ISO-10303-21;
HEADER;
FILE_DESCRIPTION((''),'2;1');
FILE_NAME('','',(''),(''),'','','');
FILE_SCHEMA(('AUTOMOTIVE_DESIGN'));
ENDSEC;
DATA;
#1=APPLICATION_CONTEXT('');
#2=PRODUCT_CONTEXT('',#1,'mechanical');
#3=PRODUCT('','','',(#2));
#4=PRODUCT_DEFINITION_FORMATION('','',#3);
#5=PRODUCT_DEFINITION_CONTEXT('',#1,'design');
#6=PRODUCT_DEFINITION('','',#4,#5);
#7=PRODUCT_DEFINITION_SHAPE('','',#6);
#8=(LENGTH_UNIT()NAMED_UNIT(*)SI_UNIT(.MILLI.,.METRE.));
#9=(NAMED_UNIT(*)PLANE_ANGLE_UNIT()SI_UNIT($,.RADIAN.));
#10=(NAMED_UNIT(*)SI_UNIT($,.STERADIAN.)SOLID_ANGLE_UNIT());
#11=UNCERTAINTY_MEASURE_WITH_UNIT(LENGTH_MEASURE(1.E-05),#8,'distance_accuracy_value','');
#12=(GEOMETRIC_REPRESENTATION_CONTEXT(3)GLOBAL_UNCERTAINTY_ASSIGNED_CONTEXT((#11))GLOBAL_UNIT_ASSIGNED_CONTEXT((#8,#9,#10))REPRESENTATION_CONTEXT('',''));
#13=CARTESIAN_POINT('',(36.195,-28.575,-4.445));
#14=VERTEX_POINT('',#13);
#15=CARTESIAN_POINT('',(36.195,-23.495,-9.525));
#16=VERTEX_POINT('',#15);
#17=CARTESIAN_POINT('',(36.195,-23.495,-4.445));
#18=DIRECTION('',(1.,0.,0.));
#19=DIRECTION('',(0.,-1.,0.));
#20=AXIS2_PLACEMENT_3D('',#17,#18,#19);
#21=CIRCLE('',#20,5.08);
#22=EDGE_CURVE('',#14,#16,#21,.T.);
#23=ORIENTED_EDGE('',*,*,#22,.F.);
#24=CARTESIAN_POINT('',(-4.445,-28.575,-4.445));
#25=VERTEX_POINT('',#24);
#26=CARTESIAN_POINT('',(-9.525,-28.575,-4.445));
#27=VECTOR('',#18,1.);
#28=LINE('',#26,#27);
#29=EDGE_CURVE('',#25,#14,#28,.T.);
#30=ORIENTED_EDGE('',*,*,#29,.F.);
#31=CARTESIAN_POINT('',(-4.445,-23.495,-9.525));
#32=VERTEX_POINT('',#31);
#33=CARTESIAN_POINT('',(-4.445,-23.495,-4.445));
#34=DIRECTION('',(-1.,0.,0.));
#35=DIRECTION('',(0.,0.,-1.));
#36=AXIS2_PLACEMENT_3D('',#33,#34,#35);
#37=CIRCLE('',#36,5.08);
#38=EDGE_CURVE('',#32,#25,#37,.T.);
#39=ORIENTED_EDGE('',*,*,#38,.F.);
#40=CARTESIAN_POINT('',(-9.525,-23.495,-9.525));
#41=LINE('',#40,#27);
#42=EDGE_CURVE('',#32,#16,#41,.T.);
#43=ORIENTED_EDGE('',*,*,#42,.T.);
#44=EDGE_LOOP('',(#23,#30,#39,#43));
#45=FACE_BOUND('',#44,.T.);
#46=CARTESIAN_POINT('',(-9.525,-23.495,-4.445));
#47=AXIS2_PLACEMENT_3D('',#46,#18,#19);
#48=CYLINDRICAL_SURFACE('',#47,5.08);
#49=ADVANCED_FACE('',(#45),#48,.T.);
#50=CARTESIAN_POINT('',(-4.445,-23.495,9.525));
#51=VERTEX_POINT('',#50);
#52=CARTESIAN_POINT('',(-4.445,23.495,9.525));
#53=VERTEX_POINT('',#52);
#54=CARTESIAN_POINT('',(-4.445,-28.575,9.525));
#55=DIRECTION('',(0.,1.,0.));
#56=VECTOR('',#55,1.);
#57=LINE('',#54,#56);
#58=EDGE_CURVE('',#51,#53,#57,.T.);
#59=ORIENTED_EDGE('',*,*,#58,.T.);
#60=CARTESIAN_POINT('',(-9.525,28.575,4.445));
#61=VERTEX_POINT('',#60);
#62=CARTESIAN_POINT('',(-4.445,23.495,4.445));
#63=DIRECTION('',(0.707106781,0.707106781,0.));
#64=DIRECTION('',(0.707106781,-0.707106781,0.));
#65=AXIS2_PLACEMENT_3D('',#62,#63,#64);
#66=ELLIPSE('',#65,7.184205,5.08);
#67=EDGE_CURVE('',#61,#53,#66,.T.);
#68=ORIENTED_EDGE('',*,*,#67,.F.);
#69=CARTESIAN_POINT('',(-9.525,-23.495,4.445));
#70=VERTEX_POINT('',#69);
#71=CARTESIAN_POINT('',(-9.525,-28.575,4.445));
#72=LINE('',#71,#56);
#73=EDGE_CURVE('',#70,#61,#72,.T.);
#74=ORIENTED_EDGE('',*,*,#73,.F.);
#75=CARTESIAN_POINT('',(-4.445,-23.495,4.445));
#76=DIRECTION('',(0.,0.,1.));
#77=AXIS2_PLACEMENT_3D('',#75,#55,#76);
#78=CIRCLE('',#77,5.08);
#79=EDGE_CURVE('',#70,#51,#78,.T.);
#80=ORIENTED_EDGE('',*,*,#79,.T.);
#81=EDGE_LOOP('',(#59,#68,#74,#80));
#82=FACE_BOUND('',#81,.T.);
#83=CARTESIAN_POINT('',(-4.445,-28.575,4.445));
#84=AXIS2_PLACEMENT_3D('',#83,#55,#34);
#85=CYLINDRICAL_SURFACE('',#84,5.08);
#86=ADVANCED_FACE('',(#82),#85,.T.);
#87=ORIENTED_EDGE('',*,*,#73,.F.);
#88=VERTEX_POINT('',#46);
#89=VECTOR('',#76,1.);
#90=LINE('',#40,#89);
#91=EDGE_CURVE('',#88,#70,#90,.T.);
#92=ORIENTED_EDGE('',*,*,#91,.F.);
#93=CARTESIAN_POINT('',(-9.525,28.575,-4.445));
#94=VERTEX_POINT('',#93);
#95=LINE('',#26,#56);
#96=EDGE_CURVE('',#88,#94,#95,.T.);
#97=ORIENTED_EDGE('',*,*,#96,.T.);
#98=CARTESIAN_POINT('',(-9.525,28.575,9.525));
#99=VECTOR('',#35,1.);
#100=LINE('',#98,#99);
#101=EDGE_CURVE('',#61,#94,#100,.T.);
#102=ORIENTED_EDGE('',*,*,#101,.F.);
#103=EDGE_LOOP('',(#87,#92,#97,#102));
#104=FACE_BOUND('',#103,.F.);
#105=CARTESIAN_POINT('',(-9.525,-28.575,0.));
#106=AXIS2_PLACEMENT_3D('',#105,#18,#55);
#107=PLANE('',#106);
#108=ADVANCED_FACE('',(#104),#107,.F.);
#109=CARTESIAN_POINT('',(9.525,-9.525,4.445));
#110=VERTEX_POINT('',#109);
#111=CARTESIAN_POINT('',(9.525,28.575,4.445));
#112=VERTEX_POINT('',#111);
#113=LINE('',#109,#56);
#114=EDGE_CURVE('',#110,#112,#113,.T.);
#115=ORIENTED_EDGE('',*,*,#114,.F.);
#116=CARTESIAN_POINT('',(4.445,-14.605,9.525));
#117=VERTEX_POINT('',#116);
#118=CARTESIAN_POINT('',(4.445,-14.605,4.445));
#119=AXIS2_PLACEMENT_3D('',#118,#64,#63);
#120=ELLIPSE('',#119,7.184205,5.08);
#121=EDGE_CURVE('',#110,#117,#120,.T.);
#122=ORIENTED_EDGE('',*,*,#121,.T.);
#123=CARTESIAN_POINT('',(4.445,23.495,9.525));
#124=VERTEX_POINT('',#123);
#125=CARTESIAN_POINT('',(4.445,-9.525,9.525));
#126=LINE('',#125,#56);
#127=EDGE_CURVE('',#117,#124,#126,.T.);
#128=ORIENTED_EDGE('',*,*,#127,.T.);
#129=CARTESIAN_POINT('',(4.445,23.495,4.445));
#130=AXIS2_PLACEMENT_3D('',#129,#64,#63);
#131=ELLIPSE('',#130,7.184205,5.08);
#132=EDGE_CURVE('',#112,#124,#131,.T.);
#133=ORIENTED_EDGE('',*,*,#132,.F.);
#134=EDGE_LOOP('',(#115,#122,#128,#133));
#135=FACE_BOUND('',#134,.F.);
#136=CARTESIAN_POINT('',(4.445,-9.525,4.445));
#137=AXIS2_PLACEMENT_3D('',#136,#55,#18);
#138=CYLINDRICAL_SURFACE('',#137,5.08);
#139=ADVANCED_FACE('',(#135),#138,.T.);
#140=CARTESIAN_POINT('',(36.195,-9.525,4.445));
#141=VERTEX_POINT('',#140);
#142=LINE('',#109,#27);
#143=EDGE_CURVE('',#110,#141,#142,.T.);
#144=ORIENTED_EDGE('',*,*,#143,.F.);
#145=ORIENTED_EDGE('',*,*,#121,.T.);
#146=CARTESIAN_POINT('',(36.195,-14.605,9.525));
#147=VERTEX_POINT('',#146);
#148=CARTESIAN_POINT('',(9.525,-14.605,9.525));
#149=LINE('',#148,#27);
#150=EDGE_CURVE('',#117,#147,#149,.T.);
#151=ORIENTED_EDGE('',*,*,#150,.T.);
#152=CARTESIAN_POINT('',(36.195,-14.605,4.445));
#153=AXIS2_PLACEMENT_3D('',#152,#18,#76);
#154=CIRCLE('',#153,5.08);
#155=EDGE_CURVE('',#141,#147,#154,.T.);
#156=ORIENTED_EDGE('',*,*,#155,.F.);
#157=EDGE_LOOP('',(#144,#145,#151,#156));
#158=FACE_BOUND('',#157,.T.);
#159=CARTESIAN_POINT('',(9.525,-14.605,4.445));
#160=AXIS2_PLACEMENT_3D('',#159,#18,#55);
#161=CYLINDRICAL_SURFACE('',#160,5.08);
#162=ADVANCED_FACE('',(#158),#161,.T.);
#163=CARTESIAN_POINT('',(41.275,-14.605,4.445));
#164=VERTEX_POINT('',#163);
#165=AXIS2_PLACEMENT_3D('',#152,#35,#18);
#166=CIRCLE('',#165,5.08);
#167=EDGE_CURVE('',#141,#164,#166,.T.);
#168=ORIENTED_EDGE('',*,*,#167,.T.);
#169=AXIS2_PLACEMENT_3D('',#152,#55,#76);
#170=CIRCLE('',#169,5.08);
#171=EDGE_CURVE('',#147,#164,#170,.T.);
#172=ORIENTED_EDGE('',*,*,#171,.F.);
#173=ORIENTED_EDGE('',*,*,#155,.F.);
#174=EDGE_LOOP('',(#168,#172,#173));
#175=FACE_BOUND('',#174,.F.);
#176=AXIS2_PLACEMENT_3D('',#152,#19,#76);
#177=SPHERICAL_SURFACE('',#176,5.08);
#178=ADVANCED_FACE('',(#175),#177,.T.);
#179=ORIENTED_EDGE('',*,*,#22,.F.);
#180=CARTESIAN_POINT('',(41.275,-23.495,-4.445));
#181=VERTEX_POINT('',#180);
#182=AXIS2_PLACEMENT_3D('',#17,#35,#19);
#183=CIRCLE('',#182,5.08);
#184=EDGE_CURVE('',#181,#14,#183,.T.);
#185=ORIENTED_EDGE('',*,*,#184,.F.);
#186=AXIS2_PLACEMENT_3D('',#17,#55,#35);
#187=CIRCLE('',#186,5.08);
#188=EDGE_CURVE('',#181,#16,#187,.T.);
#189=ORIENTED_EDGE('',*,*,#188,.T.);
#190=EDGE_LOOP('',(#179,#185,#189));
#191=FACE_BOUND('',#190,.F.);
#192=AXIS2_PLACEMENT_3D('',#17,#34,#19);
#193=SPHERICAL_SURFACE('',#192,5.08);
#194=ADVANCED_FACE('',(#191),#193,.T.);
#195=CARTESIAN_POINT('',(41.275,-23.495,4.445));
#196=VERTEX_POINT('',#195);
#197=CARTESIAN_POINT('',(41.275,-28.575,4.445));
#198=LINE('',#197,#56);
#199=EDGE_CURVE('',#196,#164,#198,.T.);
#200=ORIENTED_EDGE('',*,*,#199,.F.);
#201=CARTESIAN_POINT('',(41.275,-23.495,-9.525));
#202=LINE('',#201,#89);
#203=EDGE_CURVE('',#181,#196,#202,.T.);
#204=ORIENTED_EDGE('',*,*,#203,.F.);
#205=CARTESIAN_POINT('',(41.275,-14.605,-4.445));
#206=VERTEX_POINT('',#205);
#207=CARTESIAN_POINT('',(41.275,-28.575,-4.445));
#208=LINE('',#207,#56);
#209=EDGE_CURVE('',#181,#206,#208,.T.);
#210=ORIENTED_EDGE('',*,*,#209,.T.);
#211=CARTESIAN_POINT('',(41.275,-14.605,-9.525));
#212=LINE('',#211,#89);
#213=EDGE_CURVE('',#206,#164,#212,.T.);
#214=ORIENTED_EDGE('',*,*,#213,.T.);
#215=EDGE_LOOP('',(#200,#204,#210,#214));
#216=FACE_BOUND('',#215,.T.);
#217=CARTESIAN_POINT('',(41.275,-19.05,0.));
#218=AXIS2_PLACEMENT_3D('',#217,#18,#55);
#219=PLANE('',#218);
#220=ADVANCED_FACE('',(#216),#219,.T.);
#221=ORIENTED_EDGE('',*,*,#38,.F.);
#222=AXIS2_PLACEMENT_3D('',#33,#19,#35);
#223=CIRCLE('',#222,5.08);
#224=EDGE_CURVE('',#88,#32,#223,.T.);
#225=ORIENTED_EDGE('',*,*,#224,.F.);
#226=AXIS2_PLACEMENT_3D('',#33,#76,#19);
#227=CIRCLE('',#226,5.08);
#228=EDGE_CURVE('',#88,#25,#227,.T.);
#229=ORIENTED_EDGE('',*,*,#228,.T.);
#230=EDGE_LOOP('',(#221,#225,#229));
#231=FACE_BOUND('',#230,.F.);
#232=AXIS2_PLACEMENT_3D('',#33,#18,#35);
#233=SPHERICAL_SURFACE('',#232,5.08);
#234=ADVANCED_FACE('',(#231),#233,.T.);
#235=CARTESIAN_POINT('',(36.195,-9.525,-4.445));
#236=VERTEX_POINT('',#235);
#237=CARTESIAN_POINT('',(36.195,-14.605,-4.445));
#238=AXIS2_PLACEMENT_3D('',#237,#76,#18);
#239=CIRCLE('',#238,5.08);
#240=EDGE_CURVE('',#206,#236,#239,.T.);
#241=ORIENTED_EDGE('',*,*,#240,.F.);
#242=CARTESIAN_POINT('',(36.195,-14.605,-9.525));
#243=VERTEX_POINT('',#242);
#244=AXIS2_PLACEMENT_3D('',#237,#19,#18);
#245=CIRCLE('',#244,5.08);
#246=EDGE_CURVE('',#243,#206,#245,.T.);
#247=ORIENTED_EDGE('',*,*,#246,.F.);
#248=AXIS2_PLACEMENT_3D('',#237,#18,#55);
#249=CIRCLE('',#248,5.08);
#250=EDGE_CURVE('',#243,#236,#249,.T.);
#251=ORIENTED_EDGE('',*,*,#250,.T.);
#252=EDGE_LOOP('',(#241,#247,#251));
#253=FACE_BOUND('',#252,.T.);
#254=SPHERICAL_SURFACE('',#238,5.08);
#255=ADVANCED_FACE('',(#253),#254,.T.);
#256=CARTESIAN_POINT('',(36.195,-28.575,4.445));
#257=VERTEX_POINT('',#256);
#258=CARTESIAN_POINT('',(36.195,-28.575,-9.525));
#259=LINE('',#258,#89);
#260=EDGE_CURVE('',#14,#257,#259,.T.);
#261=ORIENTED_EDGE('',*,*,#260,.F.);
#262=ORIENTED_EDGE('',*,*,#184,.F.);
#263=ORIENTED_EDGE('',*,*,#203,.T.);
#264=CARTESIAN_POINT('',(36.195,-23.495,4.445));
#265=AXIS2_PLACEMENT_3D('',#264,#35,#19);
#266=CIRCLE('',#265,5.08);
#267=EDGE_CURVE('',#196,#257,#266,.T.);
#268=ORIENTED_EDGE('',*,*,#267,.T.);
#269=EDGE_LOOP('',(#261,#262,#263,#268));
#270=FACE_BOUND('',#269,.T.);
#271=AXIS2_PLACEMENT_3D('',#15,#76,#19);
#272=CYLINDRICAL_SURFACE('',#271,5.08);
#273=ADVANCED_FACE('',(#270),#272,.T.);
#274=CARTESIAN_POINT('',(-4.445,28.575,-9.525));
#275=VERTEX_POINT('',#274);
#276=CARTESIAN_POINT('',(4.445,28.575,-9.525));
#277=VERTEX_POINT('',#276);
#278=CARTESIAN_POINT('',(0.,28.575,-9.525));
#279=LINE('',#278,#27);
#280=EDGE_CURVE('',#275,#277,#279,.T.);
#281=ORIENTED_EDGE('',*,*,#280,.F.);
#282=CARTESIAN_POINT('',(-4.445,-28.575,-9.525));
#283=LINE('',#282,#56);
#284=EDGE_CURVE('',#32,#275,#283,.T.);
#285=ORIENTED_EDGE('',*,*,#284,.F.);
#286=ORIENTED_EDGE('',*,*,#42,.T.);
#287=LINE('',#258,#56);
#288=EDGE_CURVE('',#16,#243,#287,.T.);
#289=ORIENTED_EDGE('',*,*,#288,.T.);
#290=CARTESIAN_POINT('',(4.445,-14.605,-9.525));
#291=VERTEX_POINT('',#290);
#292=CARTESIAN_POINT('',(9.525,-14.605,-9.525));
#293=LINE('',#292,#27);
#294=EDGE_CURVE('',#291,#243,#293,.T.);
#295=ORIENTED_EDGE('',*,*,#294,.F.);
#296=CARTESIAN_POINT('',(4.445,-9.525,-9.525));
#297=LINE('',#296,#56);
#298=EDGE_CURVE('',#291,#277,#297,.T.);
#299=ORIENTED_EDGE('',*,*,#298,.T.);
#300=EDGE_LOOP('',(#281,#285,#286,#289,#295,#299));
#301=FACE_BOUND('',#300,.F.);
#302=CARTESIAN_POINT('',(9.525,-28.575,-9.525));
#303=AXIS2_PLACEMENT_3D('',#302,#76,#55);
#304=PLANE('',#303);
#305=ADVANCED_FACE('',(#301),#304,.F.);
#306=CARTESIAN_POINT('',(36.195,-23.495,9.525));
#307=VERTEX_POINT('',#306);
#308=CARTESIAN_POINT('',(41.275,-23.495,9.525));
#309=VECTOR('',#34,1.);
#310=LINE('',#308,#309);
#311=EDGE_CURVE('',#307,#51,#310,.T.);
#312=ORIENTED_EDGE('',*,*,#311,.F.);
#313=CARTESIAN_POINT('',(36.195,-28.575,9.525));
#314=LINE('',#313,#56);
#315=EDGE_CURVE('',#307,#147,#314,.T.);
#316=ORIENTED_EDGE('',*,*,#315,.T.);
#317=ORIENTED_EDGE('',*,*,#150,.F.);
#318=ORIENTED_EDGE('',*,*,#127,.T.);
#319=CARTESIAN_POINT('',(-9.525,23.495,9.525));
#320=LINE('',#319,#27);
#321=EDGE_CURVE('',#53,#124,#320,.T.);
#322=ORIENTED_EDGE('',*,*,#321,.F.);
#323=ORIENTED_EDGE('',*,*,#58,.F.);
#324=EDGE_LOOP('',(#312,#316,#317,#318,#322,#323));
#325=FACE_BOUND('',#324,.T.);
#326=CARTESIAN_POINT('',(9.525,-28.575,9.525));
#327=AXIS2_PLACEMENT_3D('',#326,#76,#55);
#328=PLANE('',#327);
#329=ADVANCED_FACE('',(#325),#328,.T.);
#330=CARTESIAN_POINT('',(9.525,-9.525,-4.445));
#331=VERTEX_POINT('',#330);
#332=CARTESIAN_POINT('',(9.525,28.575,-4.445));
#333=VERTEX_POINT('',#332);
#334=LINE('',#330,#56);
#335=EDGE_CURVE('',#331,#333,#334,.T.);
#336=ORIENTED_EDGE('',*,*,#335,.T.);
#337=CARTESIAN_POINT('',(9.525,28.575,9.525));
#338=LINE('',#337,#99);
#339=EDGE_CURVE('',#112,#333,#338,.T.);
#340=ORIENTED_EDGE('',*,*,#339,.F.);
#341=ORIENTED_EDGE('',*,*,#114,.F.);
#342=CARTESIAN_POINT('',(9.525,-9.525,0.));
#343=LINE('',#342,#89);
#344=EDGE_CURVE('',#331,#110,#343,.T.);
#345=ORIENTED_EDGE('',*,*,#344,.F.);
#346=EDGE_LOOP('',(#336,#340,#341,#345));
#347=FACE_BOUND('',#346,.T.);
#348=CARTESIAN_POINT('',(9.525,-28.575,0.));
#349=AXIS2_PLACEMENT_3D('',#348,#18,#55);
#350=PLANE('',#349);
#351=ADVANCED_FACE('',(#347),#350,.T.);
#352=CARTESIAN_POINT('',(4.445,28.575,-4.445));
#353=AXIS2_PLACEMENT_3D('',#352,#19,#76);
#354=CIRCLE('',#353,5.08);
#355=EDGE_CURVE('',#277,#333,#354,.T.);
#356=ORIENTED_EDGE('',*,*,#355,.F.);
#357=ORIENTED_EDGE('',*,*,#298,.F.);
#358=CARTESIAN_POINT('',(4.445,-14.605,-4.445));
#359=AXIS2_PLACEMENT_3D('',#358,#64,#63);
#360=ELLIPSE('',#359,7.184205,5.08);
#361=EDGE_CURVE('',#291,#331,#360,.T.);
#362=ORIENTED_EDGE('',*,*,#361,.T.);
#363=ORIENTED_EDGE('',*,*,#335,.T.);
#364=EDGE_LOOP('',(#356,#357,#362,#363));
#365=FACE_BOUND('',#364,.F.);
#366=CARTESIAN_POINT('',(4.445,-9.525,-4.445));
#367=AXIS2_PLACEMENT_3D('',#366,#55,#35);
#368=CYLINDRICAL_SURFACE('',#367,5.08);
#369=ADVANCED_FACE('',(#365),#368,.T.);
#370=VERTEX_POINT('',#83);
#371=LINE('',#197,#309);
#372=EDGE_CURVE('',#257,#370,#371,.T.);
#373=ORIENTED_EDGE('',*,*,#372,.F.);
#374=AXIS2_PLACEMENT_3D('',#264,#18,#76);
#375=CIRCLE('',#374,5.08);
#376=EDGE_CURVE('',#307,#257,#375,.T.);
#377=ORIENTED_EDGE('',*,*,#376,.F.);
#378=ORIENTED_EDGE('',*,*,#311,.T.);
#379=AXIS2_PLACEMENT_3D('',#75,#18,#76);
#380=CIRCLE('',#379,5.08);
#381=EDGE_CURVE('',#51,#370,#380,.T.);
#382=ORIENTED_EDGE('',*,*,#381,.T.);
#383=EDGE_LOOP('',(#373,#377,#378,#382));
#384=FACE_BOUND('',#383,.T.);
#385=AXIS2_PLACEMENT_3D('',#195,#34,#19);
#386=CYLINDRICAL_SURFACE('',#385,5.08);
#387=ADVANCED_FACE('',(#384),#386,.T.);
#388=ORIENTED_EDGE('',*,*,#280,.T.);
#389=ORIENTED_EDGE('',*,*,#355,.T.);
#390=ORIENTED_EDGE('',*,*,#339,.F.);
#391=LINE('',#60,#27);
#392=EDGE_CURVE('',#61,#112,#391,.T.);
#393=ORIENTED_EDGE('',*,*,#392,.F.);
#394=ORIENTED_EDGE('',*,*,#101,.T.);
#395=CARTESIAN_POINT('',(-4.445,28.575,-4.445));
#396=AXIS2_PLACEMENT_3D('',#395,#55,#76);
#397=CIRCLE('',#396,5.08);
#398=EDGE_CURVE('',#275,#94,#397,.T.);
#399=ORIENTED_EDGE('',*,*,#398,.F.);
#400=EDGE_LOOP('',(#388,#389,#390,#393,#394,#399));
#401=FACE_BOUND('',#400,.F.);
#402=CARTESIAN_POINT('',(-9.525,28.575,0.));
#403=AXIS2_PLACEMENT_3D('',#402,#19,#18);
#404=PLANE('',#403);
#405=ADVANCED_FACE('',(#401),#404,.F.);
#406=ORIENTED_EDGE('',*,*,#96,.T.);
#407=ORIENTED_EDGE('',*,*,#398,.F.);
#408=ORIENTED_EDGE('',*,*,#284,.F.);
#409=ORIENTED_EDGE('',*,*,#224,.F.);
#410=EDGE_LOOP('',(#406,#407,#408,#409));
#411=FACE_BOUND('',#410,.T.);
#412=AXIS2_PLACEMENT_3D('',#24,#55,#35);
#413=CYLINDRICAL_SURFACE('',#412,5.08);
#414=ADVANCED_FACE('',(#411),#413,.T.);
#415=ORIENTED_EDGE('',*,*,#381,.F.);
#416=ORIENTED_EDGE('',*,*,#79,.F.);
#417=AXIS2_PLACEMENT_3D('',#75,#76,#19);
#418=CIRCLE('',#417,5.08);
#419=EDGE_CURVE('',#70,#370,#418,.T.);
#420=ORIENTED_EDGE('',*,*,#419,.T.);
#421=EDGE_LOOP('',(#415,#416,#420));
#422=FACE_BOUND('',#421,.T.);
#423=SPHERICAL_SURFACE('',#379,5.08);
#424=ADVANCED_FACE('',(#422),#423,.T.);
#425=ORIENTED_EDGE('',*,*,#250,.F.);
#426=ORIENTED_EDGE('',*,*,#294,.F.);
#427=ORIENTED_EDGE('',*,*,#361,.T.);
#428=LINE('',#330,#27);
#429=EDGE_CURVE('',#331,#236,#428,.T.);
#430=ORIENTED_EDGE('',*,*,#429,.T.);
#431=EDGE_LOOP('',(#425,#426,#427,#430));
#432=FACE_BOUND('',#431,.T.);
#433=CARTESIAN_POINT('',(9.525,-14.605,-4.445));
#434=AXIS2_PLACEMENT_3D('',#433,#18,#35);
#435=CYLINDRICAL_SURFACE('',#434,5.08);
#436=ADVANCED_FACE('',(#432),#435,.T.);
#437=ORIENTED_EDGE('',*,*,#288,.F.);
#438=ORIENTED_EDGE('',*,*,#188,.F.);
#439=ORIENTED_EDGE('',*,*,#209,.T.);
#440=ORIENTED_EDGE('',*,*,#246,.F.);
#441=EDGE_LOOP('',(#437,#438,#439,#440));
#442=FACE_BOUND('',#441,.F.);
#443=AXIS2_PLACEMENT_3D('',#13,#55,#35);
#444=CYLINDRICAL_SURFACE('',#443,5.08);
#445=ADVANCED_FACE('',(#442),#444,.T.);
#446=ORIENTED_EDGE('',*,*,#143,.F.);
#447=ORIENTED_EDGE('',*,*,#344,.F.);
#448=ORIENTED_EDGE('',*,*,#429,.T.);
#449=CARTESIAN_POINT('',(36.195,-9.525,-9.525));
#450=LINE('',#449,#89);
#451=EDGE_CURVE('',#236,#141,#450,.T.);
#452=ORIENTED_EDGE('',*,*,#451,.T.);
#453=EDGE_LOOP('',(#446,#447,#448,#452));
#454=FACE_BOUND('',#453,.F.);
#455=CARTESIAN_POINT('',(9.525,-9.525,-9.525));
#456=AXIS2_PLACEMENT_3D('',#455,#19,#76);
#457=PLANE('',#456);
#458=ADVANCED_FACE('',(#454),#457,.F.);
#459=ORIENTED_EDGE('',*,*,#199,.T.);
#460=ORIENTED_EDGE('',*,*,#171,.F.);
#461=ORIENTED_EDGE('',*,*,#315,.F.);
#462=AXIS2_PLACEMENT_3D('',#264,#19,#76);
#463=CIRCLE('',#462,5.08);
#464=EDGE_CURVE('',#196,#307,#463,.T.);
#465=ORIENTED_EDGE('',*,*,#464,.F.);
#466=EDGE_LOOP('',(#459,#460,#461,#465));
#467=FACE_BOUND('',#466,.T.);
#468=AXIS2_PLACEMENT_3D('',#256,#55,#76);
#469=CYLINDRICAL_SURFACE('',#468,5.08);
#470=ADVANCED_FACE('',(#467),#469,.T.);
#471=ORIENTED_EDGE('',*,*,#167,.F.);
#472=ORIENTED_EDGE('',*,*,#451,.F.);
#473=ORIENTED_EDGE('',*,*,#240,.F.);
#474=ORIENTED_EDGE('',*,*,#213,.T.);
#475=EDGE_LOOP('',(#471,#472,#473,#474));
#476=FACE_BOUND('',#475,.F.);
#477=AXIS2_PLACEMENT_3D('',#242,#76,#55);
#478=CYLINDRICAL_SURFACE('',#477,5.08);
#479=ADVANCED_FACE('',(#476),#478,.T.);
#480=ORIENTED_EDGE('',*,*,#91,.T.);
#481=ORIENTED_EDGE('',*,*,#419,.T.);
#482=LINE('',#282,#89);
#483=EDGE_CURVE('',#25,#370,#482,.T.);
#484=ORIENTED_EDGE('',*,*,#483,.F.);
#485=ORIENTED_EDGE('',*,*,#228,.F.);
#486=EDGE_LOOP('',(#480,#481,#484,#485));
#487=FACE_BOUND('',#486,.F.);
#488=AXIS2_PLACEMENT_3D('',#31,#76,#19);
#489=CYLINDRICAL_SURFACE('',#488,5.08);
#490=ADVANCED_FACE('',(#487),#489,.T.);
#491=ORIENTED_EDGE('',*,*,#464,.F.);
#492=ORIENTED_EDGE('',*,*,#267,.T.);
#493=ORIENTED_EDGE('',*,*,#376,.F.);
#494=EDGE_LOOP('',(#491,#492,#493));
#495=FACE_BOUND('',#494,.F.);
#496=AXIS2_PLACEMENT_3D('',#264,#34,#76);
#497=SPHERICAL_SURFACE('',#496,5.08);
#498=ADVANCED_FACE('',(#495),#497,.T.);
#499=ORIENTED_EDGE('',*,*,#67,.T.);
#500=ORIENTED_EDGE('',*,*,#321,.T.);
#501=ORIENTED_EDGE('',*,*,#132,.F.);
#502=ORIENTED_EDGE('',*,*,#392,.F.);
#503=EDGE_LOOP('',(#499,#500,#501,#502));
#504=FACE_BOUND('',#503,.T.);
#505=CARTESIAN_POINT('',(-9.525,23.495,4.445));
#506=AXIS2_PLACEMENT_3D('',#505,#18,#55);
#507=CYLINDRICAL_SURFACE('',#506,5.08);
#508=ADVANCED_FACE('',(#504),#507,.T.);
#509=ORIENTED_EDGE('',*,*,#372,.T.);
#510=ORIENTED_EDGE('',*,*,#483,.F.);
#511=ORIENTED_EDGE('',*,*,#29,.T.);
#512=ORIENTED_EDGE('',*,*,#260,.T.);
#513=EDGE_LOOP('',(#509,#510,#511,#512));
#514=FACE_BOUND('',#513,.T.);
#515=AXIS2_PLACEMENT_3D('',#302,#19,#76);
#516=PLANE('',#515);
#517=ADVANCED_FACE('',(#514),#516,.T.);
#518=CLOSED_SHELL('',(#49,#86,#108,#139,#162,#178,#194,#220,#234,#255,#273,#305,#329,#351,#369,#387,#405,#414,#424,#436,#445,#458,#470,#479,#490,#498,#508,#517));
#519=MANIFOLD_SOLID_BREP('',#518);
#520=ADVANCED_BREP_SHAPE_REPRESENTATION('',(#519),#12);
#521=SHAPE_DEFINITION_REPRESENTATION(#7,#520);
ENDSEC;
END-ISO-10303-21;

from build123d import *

# Parameters (mm, degrees)
F0_W     = 19.05
F0_H     = 57.15
F1_DEPTH = 9.525
F2_W     = 19.05
F2_H     = 19.05
F3_DEPTH = 31.75
F4_R     = 5.08


with BuildPart() as f1:
    # F0 (on Top) → F1 (new body, symmetric)
    with BuildSketch(Plane.XY):
        Rectangle(F0_W, F0_H)
    extrude(amount=F1_DEPTH, both=True)

    # F2 (on face) → F3 (join)
    with BuildSketch(Plane.YZ.offset(9.525)):
        with Locations((-19.05, 0)):
            Rectangle(F2_W, F2_H)
    extrude(amount=F3_DEPTH)

    # F4
    f4_edges = [f1.edges().sort_by_distance(p)[0] for p in [
        (9.525, 9.525, 9.525),
        (15.875, -28.575, 9.525),
        (41.275, -19.05, 9.525),
        (25.4, -9.525, 9.525),
        (0, 28.575, 9.525),
        (-9.525, 0, 9.525),
        (15.875, -28.575, -9.525),
        (41.275, -28.575, 0),
        (41.275, -9.525, 0),
        (41.275, -19.05, -9.525),
        (-9.525, 0, -9.525),
        (-9.525, -28.575, 0),
        (9.525, 9.525, -9.525),
        (25.4, -9.525, -9.525),
    ]]
    fillet(f4_edges, radius=F4_R)


solid = f1.part
